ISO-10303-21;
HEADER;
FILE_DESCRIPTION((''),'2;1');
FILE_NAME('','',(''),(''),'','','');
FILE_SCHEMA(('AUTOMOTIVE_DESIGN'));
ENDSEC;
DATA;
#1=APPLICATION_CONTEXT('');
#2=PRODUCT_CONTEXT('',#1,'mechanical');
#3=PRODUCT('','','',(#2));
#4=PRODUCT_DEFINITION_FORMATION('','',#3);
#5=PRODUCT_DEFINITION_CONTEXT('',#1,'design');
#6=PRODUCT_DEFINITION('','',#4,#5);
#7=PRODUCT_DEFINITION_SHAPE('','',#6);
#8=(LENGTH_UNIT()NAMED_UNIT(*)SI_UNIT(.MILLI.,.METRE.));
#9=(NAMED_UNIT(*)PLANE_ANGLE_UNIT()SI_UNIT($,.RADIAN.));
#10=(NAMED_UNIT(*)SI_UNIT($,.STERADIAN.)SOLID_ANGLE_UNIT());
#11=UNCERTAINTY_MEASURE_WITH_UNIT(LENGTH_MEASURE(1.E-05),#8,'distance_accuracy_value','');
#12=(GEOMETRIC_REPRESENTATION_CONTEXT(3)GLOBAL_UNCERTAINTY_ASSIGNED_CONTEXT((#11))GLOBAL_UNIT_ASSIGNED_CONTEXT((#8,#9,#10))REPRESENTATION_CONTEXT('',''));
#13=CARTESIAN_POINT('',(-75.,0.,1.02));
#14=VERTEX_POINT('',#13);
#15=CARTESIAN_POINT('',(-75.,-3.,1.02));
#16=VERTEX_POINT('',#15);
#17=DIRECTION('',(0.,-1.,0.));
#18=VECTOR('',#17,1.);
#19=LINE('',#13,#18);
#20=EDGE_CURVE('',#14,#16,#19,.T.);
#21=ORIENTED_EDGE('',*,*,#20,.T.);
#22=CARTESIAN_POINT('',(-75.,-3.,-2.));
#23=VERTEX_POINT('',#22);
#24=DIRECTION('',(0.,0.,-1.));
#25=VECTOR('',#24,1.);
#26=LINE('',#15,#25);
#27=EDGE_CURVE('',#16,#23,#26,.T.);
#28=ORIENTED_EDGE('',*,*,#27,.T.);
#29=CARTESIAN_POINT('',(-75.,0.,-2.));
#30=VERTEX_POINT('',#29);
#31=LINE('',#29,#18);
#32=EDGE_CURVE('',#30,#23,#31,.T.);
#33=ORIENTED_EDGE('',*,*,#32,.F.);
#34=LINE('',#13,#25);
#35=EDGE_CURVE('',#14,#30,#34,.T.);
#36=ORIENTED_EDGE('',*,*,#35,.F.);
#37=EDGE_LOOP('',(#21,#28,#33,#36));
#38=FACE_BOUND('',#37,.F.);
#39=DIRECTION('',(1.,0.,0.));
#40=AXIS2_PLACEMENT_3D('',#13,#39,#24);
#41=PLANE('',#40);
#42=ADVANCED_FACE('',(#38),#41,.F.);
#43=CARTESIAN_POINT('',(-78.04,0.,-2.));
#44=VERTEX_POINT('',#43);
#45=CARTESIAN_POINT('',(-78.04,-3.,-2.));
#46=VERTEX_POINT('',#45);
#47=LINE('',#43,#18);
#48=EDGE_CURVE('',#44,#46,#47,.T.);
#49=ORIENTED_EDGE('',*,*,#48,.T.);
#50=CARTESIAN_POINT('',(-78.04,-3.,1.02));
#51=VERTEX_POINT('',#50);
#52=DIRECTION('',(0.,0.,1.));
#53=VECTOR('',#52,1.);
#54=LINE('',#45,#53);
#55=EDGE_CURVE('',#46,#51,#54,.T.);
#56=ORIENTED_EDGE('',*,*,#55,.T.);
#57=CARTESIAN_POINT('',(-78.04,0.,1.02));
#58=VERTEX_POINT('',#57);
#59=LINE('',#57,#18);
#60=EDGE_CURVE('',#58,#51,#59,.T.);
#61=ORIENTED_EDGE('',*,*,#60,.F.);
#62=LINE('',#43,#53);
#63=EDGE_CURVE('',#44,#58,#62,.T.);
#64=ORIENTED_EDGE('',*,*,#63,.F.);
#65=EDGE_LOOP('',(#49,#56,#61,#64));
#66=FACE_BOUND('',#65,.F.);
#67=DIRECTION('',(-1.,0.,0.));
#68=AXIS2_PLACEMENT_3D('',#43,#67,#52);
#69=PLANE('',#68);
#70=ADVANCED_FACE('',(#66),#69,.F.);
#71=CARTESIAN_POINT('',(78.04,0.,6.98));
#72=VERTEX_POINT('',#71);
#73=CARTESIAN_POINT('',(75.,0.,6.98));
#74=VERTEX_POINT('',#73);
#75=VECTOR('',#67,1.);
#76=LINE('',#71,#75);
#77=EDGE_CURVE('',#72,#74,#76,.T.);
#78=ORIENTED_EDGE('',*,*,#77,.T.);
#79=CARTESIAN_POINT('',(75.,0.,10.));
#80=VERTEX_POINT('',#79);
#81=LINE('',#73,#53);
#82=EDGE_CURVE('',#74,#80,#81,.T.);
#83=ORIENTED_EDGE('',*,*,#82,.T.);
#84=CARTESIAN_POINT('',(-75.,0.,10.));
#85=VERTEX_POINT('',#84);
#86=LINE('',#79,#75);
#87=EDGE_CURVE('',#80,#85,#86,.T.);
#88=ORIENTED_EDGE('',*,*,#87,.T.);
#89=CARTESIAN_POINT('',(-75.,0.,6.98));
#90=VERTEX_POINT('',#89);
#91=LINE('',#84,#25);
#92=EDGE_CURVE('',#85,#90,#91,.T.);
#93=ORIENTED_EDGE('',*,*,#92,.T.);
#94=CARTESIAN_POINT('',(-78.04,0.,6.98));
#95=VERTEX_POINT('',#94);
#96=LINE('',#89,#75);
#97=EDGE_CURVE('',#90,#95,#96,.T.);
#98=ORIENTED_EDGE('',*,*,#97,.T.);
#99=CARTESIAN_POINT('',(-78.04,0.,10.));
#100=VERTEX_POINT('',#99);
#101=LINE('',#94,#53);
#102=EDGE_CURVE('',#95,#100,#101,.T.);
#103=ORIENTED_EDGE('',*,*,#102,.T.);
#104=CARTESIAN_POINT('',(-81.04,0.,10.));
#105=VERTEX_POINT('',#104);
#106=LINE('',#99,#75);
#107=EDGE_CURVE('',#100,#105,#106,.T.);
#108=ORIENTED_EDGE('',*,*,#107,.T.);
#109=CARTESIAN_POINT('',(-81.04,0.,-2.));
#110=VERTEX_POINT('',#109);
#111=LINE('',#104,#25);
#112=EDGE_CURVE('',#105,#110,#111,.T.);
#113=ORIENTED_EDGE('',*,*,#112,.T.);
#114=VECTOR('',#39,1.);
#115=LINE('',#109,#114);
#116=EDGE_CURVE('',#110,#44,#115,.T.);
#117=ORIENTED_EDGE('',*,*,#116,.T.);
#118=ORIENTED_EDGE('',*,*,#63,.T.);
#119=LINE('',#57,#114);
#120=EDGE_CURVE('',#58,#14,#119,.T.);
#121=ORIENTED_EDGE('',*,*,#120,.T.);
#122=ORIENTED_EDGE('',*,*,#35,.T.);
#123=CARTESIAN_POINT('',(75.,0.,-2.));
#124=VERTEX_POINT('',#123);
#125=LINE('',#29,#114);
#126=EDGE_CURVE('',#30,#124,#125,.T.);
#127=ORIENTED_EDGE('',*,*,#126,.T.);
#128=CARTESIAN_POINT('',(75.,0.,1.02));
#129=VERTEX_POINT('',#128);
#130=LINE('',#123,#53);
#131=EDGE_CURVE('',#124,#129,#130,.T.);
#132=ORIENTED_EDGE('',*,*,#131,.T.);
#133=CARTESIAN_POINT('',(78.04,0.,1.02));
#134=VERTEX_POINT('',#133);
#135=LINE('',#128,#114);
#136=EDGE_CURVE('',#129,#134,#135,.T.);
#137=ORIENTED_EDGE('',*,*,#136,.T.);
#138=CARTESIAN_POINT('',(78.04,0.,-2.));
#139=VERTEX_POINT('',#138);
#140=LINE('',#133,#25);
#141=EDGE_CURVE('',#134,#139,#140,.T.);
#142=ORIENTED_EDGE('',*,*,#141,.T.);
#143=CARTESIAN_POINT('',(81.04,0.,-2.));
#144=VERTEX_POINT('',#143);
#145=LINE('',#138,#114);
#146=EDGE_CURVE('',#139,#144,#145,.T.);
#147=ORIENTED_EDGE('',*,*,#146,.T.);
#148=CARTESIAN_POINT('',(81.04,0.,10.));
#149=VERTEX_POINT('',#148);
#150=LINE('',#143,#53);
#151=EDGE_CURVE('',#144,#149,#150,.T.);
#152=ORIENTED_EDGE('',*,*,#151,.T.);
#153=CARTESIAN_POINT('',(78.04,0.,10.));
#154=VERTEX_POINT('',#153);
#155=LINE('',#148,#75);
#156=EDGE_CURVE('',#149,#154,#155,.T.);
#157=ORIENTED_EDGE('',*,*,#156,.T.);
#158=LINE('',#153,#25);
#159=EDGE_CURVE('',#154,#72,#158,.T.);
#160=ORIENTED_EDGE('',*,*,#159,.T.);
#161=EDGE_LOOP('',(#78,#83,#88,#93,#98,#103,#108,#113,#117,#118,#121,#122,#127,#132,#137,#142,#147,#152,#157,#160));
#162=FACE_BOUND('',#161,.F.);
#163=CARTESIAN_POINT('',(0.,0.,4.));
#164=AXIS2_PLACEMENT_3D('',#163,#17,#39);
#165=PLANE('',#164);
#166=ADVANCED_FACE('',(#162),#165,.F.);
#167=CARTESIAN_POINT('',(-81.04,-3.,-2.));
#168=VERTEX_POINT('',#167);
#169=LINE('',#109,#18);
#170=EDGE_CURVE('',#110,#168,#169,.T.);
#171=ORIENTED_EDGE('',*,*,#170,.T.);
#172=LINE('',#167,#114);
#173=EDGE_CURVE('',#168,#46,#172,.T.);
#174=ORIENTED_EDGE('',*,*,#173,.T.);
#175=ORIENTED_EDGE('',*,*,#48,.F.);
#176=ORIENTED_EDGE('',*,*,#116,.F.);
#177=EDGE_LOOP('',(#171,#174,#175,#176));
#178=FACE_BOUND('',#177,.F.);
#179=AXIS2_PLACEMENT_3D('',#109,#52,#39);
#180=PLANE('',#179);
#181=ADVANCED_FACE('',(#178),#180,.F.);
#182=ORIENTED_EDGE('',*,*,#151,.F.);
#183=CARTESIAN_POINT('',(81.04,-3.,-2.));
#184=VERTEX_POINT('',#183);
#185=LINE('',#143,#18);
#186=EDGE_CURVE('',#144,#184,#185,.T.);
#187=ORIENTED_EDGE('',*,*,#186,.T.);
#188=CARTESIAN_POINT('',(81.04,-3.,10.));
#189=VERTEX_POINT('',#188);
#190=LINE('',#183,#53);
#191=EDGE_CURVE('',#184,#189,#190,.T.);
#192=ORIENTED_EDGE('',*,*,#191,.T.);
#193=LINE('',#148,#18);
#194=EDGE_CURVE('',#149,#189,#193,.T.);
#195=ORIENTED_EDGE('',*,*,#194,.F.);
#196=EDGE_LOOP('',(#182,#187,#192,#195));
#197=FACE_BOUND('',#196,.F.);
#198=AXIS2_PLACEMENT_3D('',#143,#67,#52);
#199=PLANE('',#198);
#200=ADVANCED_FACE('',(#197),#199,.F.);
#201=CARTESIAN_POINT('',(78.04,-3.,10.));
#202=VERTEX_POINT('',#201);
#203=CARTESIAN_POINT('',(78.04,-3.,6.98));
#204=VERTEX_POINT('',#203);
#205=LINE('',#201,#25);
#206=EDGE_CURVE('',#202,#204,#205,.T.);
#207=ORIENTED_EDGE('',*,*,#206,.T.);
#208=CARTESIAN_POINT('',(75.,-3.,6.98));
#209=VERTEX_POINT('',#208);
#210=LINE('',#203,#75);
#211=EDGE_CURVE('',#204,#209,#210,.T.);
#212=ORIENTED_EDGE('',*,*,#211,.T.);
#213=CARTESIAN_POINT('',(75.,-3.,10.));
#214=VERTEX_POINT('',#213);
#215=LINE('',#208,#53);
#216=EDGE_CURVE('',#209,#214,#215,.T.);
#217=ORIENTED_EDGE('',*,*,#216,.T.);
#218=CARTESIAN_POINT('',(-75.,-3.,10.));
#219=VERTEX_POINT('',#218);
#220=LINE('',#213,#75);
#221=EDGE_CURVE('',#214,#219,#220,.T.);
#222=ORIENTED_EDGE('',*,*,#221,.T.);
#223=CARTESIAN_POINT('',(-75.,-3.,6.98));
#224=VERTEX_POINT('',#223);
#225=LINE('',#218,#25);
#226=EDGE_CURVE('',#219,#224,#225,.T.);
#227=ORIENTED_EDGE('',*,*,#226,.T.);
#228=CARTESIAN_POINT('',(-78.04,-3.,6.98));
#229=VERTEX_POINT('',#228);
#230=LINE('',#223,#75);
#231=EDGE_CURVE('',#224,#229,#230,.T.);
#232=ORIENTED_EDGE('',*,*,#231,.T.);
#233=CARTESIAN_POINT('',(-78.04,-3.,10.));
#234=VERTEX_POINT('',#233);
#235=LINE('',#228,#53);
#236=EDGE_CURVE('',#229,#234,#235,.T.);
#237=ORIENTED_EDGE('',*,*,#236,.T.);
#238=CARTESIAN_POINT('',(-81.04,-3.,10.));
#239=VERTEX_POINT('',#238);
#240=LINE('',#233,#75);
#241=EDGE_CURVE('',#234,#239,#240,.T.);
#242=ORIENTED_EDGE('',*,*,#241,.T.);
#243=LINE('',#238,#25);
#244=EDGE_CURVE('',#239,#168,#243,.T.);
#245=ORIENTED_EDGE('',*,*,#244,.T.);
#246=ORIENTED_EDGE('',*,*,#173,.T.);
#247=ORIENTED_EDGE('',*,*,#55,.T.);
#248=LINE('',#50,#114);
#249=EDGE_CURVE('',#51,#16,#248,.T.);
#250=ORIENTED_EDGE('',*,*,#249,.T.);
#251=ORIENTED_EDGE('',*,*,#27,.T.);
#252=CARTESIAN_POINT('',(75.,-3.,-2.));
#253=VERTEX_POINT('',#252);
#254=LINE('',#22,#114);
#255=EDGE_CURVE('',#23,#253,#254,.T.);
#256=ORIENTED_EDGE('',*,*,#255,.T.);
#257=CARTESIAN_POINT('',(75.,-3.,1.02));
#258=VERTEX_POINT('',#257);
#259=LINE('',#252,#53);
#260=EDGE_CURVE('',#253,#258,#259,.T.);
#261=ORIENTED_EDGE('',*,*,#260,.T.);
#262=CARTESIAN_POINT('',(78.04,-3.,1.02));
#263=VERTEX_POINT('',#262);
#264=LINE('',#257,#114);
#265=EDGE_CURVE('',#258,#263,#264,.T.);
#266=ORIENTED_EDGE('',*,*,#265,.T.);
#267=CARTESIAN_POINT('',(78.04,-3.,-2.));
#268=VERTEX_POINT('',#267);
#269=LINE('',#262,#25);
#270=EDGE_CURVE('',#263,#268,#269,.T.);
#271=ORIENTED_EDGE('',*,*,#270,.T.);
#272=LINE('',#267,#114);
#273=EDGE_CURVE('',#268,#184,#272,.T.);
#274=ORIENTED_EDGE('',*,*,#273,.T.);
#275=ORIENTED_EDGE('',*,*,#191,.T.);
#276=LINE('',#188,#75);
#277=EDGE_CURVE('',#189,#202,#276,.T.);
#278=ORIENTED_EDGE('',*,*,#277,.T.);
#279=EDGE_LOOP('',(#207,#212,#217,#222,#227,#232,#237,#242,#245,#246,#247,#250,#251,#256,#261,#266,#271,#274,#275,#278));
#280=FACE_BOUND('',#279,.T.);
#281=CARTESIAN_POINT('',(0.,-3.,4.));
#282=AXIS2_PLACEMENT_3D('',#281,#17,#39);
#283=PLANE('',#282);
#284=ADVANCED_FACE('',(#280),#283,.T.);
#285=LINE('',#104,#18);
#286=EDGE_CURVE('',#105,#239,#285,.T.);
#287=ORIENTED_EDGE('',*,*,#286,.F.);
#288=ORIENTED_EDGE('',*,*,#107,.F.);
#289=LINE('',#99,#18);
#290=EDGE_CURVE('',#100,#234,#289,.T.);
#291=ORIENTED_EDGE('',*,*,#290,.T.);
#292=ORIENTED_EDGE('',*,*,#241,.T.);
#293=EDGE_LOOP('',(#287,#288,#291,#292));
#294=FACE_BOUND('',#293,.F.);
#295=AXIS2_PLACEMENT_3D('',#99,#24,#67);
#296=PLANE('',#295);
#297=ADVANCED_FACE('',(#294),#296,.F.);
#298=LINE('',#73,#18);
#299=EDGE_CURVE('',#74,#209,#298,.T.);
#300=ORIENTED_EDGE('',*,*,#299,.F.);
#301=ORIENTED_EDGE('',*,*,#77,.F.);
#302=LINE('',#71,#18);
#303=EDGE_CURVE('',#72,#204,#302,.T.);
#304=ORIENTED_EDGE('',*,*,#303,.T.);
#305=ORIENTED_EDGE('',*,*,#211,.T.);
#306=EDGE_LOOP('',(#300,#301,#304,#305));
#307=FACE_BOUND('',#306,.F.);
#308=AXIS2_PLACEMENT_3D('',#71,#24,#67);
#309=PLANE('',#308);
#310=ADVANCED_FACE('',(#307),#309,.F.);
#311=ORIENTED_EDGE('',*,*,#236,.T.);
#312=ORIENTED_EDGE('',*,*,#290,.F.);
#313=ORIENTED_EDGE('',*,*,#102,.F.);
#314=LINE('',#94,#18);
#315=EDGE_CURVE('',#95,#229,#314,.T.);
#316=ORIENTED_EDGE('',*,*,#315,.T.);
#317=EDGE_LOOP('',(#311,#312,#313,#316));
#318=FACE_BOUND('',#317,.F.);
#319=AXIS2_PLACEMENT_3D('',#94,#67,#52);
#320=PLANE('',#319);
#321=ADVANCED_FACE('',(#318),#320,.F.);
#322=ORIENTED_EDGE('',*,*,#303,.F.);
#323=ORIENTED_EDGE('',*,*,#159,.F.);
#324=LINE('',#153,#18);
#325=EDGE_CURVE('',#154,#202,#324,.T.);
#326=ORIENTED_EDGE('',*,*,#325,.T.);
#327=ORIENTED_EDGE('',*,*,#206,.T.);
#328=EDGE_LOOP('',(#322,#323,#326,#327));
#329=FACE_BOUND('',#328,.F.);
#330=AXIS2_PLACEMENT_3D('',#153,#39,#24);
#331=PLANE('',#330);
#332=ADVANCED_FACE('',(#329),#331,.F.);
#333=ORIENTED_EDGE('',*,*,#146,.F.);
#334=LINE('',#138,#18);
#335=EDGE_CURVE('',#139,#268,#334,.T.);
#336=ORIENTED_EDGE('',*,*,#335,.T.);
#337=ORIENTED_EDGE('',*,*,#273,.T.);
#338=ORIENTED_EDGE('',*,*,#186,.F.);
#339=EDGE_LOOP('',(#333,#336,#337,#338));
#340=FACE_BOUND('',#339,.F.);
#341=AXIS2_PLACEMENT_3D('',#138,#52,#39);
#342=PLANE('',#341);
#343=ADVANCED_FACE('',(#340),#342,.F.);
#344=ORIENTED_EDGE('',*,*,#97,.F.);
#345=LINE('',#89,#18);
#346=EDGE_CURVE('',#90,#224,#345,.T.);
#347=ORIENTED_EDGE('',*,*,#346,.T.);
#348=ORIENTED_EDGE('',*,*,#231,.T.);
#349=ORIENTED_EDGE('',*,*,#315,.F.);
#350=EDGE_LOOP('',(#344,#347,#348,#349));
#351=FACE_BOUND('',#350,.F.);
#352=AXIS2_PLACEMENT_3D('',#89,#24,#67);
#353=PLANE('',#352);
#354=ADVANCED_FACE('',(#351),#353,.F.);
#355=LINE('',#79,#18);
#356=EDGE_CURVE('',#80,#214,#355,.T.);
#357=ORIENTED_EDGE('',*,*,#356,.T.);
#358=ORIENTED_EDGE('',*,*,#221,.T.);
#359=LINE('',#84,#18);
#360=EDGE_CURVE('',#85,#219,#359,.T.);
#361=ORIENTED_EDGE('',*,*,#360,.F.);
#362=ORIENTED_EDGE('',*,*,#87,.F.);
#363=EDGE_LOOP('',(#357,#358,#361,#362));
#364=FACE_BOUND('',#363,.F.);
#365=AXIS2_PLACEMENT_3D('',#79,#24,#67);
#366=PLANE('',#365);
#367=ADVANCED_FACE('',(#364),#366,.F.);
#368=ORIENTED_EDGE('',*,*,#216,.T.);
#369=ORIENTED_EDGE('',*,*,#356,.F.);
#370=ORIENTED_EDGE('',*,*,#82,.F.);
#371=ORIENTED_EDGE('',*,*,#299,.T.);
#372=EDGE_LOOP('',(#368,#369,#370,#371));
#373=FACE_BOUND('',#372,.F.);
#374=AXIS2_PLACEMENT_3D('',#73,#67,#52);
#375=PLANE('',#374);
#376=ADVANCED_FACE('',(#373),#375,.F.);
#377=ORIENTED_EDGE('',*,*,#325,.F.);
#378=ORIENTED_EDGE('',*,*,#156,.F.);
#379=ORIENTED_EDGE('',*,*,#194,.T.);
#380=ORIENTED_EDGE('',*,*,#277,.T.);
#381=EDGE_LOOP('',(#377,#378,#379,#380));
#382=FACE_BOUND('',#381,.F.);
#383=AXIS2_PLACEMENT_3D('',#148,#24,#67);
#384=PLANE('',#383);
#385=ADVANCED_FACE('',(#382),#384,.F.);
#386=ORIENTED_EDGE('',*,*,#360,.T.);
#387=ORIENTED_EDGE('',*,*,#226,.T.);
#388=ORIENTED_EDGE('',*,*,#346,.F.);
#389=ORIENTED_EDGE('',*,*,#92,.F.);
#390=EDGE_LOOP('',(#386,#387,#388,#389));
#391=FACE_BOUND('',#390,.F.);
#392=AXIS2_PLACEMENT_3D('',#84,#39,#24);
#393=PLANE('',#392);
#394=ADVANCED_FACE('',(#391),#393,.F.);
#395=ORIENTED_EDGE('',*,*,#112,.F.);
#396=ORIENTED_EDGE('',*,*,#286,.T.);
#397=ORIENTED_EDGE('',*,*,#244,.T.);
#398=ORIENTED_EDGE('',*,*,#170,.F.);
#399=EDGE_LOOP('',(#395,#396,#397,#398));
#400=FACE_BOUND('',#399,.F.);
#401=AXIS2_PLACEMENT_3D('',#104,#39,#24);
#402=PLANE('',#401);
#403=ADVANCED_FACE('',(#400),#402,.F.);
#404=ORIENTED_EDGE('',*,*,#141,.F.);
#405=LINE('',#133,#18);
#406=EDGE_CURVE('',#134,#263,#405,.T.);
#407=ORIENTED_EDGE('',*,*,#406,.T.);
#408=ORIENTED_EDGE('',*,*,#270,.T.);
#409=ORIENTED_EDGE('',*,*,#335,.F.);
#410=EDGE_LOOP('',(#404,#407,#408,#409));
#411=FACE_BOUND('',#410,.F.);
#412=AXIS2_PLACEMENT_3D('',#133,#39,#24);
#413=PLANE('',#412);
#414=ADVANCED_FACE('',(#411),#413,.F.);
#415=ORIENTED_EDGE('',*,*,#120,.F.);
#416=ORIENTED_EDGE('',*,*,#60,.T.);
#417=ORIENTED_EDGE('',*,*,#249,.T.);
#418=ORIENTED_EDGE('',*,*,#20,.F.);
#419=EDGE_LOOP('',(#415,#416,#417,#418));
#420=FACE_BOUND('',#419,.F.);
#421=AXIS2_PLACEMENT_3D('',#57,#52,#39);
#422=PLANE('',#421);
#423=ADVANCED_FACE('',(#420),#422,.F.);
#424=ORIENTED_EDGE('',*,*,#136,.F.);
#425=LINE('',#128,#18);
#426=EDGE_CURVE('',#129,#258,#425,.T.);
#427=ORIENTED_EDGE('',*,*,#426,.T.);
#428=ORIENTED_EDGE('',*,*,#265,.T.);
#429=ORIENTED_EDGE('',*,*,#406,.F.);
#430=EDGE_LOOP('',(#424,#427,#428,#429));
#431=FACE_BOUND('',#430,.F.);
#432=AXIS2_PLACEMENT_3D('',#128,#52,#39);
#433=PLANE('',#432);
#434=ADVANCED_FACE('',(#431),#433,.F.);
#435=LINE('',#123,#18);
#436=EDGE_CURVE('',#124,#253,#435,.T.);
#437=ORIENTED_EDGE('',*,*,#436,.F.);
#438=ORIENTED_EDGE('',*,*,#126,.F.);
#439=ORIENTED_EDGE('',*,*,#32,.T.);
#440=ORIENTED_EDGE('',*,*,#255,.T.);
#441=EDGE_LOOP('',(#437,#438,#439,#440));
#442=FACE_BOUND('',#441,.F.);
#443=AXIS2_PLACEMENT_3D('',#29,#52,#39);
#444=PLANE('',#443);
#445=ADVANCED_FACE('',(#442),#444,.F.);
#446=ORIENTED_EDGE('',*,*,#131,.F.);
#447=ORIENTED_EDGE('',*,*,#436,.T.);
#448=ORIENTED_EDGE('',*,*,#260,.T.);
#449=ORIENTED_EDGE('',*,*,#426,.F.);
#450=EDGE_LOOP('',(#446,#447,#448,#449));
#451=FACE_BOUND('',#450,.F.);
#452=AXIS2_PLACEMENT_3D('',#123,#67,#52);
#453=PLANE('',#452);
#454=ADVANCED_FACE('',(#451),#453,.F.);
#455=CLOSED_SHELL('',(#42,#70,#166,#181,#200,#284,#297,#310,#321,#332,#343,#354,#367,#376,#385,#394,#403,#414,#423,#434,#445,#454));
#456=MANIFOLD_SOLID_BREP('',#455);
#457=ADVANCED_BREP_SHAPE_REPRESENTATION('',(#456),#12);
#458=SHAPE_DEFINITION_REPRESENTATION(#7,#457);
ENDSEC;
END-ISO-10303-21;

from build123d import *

# Parameters (mm, degrees)
F1_DEPTH = 3


# Not quite as in the source:
# - a feature names something its author has since deleted; it is built from what else it names


with BuildPart() as f1:
    # F0 (on Front) → F1 (new body)
    with BuildSketch(Plane.XZ):
        Polygon((-81.04, -2), (-78.04, -2), (-78.04, 1.02), (-75, 1.02), (-75, -2), (75, -2), (75, 1.02), (78.04, 1.02), (78.04, -2), (81.04, -2), (81.04, 10), (78.04, 10), (78.04, 6.98), (75, 6.98), (75, 10), (-75, 10), (-75, 6.98), (-78.04, 6.98), (-78.04, 10), (-81.04, 10), align=None)
    extrude(amount=F1_DEPTH)


solid = f1.part
